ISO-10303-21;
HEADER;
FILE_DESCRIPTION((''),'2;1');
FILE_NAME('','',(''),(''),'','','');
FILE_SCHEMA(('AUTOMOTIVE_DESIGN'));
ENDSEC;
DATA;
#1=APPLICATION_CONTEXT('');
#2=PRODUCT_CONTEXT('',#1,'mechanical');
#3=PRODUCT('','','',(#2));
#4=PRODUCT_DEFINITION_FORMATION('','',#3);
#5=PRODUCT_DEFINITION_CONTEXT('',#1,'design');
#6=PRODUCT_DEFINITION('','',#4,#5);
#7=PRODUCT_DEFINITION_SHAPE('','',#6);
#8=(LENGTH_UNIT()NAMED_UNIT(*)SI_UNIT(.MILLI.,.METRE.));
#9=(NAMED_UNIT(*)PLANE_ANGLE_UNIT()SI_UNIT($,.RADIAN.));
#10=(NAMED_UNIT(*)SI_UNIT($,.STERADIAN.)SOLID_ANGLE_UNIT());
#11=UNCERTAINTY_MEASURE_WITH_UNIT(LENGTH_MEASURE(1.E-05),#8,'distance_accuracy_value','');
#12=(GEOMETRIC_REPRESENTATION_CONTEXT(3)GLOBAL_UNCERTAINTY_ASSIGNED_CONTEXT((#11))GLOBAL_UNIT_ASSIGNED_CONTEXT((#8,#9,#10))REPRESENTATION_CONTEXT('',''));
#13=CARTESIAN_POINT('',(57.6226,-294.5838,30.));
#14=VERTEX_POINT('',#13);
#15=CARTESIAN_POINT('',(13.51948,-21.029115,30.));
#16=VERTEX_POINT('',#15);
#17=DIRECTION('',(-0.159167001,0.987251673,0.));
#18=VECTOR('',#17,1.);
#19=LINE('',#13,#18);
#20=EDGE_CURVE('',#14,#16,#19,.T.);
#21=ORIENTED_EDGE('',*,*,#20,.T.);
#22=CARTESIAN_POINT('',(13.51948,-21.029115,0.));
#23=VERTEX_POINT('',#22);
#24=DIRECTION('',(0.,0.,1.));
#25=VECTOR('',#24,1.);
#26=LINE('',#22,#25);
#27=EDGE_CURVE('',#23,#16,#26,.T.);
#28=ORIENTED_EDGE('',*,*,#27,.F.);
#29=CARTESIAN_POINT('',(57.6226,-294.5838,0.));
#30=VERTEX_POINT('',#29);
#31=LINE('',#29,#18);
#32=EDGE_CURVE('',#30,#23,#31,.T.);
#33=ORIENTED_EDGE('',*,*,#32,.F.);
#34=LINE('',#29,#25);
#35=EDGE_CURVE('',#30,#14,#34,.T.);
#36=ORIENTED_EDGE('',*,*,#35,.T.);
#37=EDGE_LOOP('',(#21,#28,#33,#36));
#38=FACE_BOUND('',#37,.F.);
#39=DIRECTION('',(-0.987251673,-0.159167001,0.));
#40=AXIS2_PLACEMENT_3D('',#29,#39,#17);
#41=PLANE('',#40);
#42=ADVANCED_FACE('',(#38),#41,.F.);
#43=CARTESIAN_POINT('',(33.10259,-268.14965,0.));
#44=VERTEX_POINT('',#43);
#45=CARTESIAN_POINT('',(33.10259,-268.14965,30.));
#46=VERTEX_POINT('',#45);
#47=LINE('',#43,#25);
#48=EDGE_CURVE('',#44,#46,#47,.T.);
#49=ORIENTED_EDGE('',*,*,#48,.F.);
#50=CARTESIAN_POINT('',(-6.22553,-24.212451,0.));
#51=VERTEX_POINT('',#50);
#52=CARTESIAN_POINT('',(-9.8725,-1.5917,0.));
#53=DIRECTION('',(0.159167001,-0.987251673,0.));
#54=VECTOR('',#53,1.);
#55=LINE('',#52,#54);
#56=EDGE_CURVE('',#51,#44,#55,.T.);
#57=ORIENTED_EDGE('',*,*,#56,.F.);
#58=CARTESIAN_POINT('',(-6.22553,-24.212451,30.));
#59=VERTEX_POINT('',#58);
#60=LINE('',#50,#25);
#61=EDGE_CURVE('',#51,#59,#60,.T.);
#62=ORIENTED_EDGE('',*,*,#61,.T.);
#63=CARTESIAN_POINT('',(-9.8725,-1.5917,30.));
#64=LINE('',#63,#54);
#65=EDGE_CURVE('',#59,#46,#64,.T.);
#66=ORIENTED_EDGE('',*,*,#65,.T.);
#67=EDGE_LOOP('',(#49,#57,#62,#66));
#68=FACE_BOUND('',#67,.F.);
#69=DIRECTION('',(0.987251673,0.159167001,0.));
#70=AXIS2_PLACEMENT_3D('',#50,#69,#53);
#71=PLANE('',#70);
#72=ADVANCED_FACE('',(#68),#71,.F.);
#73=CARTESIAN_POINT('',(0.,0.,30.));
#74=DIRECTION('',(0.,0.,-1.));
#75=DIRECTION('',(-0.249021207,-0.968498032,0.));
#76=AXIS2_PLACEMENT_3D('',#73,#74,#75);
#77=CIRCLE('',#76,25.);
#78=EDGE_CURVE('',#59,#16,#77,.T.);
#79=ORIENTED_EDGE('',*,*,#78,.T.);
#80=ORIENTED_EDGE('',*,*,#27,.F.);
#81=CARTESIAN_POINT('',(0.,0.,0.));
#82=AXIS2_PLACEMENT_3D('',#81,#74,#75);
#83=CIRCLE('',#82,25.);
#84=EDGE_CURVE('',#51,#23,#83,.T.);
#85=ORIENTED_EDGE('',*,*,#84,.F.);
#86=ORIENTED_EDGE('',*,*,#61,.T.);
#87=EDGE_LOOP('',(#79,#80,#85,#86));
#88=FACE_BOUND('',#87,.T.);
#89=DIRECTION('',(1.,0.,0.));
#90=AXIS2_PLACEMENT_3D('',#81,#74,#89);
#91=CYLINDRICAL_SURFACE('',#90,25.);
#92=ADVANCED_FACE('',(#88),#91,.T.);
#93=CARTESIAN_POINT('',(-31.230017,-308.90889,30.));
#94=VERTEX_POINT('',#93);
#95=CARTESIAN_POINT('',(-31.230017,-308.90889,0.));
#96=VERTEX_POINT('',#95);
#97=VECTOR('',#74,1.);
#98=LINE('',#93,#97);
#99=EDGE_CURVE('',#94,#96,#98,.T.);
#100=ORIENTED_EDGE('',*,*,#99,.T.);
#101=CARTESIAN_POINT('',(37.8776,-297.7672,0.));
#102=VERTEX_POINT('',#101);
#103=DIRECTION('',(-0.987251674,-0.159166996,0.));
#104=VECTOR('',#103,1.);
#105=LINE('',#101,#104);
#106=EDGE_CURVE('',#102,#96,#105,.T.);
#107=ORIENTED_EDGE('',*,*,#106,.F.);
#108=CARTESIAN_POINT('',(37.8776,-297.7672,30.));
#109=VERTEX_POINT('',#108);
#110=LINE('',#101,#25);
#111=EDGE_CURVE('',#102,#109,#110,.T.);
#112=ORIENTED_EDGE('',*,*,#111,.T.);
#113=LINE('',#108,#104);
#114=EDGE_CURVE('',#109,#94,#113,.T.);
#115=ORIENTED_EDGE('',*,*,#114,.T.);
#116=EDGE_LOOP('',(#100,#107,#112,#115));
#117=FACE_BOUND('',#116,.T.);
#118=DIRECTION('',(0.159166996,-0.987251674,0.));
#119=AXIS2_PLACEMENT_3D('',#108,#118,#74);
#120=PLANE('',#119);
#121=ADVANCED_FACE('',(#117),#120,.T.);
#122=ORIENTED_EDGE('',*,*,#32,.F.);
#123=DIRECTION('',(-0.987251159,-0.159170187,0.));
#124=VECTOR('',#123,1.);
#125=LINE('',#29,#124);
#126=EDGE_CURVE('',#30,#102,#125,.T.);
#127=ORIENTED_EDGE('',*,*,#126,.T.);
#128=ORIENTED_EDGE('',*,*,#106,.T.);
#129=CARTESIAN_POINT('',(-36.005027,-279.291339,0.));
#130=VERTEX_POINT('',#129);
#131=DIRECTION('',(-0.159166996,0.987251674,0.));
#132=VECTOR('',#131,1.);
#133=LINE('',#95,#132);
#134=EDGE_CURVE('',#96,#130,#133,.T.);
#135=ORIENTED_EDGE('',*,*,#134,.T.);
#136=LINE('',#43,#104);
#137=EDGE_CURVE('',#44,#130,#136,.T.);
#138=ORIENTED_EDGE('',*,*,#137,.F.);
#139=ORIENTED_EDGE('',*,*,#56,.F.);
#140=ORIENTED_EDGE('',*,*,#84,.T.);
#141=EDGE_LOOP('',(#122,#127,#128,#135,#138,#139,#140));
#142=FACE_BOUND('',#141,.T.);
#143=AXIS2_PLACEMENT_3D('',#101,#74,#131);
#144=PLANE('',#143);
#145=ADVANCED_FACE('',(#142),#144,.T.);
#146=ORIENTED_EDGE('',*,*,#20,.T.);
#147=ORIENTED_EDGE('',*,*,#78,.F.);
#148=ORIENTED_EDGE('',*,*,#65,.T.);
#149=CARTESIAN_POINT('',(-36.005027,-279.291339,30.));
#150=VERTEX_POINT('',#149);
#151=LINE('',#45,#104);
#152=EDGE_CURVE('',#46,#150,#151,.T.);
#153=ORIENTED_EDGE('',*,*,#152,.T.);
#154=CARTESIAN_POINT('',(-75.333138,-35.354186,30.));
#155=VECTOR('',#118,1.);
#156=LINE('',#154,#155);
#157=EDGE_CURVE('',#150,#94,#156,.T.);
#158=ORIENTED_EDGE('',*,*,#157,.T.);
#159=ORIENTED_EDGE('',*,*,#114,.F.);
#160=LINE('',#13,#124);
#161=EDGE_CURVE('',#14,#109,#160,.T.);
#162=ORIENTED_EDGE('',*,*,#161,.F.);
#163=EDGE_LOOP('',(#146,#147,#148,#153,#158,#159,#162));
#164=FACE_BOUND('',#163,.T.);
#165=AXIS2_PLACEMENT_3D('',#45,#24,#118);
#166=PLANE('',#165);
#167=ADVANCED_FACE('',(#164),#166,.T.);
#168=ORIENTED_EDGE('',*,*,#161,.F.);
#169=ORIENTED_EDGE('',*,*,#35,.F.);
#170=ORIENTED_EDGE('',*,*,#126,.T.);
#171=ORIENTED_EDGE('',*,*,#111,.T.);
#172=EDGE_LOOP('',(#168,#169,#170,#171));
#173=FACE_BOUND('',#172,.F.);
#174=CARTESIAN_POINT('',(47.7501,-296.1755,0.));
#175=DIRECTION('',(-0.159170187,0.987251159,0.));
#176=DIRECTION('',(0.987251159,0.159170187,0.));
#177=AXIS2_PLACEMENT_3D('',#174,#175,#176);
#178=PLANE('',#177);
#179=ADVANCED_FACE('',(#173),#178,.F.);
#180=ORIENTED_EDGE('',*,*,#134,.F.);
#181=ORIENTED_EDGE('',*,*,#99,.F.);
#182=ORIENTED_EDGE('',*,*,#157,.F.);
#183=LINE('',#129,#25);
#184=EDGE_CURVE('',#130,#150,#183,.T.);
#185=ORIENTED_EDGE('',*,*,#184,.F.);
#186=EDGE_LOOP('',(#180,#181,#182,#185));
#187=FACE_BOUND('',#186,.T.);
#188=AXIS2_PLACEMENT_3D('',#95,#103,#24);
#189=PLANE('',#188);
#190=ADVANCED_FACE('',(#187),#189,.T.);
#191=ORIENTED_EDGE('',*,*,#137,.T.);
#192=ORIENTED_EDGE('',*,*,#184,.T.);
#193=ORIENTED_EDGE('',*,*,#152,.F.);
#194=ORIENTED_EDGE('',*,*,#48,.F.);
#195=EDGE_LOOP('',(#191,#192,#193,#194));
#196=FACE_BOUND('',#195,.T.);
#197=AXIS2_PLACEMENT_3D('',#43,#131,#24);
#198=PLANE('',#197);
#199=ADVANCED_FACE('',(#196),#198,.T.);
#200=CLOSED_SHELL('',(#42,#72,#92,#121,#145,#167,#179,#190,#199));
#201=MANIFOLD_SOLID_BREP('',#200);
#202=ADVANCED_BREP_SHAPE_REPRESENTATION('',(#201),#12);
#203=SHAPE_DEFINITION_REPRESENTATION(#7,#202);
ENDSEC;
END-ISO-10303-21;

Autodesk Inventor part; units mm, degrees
ref_plane "YZ Plane" through (0, 0, 0) normal (1, 0, 0) x (0, 1, 0)
ref_plane "XZ Plane" through (0, 0, 0) normal (0, 1, 0) x (-1, 0, 0)
ref_plane "XY Plane" through (0, 0, 0) normal (0, 0, 1) x (1, 0, 0)
sketch "Sketch1" plane through (0, 0, 0) normal (0, 0, 1) x (1, 0, 0)
  arc A0 (5.5018, -3.1706) -> (4.1426, 4.8126) centre (0, 0) ccw projected
  line L0 (-0.2789, 17.1872) -> (4.1426, 4.8126) projected
  arc A1 (-0.2789, 17.1872) -> (-5.4243, 16.3111) centre (-2.7743, 16.2955) ccw projected
  line L1 (-5.5018, 3.1706) -> (-5.4243, 16.3111) projected
  arc A2 (-5.5018, 3.1706) -> (-4.1426, -4.8126) centre (0, 0) ccw projected
  line L2 (-4.1426, -4.8126) -> (0.2789, -17.1872) projected
  arc A3 (0.2789, -17.1872) -> (5.4243, -16.3111) centre (2.7743, -16.2955) ccw projected
  line L3 (5.4243, -16.3111) -> (5.5018, -3.1706) projected
  circle A4 centre (1.7673, -10.3806) radius 0.5 projected
  circle A5 centre (1.2638, -7.4232) radius 0.5 projected
  circle A6 centre (0, 0) radius 4.375 projected
  circle A7 centre (-2.2708, 13.3381) radius 0.5 projected
  circle A8 centre (-1.7673, 10.3806) radius 0.5 projected
  circle A9 centre (-1.2638, 7.4232) radius 0.5 projected
  circle A10 centre (-2.7743, 16.2955) radius 0.5 projected
  circle A11 centre (2.2708, -13.3381) radius 0.5 projected
  circle A12 centre (2.7743, -16.2955) radius 0.5 projected
  line L4 (0, 0) -> (2.7743, -16.2955)
  line L5 (0, 0) -> (47.7501, -296.1755)
  line L6 (0, 0) -> (23.8751, -148.0877)
  line L7 (-9.8725, -1.5917) -> (37.8776, -297.7672)
  line L8 (37.8776, -297.7672) -> (57.6226, -294.5838)
  line L9 (57.6226, -294.5838) -> (9.8725, 1.5917)
  line L10 (9.8725, 1.5917) -> (-9.8725, -1.5917)
  line L11 (-9.8725, -1.5917) -> (57.6226, -294.5838) construction
  line L12 (37.8776, -297.7672) -> (9.8725, 1.5917) construction
  circle A13 centre (0, 0) radius 25
  point P0 (13.5195, -21.0291)
  point P1 (-6.2255, -24.2124)
  dimension "d0" = 300
  dimension "d1" = 150
  dimension "d2" = 20
  dimension "d3" = 50
extrude "Extrusion1" add sketch "Sketch1" along normal blind 30 contours L3 A3 L5 A12 L4 A11 A4 A5 A6 L10 A0 | A0 L10 L9 A13 L5 A3 L3 | L10 A6 A2 L1 A1 L0 A0 | A0 L0 A1 L1 A2 L10 L7 A13 L9 | L10 A6 | A6 L4 L10 | L5 A13 L7 L10 A2 L2 A3 | A3 L2 A2 L10 A6 L5 A5 A4 A11 A12 | L9 L8 L5 A13 | L10 L5 A6 | L4 A6 L5 | L5 A12 | A12 L5 | L5 L8 L7 A13 | L4 A5 L5 A6 | L5 A11 L4 A12 | L4 A5 L5 | A5 L4 | L5 A5 | L5 A11 L4 | A11 L5 | L4 A4 L5 A5 | L4 A11 | L5 A4 L4 A11 | L4 A4 L5 | A4 L4 | L5 A4 | A7 | A8 | A9 | A10
sketch "Sketch2" plane through (37.8776, -297.7672, 0) normal (-0.9872517, -0.159167, 0) x (0, 0, 1)
  line L0 (30, 277.0871) -> (30, 0) projected
  line L1 (30, 0) -> (0, 0)
  line L2 (0, 0) -> (0, 30)
  line L3 (0, 30) -> (30, 30)
  line L4 (30, 30) -> (30, 0)
  point P0 (0, 300)
  point P1 (30, 30)
  dimension "d6" = 30
  dimension "d7" = 30
extrude "Extrusion2" add sketch "Sketch2" along normal blind 70
properties part number "arm" material "PET Plastic"
